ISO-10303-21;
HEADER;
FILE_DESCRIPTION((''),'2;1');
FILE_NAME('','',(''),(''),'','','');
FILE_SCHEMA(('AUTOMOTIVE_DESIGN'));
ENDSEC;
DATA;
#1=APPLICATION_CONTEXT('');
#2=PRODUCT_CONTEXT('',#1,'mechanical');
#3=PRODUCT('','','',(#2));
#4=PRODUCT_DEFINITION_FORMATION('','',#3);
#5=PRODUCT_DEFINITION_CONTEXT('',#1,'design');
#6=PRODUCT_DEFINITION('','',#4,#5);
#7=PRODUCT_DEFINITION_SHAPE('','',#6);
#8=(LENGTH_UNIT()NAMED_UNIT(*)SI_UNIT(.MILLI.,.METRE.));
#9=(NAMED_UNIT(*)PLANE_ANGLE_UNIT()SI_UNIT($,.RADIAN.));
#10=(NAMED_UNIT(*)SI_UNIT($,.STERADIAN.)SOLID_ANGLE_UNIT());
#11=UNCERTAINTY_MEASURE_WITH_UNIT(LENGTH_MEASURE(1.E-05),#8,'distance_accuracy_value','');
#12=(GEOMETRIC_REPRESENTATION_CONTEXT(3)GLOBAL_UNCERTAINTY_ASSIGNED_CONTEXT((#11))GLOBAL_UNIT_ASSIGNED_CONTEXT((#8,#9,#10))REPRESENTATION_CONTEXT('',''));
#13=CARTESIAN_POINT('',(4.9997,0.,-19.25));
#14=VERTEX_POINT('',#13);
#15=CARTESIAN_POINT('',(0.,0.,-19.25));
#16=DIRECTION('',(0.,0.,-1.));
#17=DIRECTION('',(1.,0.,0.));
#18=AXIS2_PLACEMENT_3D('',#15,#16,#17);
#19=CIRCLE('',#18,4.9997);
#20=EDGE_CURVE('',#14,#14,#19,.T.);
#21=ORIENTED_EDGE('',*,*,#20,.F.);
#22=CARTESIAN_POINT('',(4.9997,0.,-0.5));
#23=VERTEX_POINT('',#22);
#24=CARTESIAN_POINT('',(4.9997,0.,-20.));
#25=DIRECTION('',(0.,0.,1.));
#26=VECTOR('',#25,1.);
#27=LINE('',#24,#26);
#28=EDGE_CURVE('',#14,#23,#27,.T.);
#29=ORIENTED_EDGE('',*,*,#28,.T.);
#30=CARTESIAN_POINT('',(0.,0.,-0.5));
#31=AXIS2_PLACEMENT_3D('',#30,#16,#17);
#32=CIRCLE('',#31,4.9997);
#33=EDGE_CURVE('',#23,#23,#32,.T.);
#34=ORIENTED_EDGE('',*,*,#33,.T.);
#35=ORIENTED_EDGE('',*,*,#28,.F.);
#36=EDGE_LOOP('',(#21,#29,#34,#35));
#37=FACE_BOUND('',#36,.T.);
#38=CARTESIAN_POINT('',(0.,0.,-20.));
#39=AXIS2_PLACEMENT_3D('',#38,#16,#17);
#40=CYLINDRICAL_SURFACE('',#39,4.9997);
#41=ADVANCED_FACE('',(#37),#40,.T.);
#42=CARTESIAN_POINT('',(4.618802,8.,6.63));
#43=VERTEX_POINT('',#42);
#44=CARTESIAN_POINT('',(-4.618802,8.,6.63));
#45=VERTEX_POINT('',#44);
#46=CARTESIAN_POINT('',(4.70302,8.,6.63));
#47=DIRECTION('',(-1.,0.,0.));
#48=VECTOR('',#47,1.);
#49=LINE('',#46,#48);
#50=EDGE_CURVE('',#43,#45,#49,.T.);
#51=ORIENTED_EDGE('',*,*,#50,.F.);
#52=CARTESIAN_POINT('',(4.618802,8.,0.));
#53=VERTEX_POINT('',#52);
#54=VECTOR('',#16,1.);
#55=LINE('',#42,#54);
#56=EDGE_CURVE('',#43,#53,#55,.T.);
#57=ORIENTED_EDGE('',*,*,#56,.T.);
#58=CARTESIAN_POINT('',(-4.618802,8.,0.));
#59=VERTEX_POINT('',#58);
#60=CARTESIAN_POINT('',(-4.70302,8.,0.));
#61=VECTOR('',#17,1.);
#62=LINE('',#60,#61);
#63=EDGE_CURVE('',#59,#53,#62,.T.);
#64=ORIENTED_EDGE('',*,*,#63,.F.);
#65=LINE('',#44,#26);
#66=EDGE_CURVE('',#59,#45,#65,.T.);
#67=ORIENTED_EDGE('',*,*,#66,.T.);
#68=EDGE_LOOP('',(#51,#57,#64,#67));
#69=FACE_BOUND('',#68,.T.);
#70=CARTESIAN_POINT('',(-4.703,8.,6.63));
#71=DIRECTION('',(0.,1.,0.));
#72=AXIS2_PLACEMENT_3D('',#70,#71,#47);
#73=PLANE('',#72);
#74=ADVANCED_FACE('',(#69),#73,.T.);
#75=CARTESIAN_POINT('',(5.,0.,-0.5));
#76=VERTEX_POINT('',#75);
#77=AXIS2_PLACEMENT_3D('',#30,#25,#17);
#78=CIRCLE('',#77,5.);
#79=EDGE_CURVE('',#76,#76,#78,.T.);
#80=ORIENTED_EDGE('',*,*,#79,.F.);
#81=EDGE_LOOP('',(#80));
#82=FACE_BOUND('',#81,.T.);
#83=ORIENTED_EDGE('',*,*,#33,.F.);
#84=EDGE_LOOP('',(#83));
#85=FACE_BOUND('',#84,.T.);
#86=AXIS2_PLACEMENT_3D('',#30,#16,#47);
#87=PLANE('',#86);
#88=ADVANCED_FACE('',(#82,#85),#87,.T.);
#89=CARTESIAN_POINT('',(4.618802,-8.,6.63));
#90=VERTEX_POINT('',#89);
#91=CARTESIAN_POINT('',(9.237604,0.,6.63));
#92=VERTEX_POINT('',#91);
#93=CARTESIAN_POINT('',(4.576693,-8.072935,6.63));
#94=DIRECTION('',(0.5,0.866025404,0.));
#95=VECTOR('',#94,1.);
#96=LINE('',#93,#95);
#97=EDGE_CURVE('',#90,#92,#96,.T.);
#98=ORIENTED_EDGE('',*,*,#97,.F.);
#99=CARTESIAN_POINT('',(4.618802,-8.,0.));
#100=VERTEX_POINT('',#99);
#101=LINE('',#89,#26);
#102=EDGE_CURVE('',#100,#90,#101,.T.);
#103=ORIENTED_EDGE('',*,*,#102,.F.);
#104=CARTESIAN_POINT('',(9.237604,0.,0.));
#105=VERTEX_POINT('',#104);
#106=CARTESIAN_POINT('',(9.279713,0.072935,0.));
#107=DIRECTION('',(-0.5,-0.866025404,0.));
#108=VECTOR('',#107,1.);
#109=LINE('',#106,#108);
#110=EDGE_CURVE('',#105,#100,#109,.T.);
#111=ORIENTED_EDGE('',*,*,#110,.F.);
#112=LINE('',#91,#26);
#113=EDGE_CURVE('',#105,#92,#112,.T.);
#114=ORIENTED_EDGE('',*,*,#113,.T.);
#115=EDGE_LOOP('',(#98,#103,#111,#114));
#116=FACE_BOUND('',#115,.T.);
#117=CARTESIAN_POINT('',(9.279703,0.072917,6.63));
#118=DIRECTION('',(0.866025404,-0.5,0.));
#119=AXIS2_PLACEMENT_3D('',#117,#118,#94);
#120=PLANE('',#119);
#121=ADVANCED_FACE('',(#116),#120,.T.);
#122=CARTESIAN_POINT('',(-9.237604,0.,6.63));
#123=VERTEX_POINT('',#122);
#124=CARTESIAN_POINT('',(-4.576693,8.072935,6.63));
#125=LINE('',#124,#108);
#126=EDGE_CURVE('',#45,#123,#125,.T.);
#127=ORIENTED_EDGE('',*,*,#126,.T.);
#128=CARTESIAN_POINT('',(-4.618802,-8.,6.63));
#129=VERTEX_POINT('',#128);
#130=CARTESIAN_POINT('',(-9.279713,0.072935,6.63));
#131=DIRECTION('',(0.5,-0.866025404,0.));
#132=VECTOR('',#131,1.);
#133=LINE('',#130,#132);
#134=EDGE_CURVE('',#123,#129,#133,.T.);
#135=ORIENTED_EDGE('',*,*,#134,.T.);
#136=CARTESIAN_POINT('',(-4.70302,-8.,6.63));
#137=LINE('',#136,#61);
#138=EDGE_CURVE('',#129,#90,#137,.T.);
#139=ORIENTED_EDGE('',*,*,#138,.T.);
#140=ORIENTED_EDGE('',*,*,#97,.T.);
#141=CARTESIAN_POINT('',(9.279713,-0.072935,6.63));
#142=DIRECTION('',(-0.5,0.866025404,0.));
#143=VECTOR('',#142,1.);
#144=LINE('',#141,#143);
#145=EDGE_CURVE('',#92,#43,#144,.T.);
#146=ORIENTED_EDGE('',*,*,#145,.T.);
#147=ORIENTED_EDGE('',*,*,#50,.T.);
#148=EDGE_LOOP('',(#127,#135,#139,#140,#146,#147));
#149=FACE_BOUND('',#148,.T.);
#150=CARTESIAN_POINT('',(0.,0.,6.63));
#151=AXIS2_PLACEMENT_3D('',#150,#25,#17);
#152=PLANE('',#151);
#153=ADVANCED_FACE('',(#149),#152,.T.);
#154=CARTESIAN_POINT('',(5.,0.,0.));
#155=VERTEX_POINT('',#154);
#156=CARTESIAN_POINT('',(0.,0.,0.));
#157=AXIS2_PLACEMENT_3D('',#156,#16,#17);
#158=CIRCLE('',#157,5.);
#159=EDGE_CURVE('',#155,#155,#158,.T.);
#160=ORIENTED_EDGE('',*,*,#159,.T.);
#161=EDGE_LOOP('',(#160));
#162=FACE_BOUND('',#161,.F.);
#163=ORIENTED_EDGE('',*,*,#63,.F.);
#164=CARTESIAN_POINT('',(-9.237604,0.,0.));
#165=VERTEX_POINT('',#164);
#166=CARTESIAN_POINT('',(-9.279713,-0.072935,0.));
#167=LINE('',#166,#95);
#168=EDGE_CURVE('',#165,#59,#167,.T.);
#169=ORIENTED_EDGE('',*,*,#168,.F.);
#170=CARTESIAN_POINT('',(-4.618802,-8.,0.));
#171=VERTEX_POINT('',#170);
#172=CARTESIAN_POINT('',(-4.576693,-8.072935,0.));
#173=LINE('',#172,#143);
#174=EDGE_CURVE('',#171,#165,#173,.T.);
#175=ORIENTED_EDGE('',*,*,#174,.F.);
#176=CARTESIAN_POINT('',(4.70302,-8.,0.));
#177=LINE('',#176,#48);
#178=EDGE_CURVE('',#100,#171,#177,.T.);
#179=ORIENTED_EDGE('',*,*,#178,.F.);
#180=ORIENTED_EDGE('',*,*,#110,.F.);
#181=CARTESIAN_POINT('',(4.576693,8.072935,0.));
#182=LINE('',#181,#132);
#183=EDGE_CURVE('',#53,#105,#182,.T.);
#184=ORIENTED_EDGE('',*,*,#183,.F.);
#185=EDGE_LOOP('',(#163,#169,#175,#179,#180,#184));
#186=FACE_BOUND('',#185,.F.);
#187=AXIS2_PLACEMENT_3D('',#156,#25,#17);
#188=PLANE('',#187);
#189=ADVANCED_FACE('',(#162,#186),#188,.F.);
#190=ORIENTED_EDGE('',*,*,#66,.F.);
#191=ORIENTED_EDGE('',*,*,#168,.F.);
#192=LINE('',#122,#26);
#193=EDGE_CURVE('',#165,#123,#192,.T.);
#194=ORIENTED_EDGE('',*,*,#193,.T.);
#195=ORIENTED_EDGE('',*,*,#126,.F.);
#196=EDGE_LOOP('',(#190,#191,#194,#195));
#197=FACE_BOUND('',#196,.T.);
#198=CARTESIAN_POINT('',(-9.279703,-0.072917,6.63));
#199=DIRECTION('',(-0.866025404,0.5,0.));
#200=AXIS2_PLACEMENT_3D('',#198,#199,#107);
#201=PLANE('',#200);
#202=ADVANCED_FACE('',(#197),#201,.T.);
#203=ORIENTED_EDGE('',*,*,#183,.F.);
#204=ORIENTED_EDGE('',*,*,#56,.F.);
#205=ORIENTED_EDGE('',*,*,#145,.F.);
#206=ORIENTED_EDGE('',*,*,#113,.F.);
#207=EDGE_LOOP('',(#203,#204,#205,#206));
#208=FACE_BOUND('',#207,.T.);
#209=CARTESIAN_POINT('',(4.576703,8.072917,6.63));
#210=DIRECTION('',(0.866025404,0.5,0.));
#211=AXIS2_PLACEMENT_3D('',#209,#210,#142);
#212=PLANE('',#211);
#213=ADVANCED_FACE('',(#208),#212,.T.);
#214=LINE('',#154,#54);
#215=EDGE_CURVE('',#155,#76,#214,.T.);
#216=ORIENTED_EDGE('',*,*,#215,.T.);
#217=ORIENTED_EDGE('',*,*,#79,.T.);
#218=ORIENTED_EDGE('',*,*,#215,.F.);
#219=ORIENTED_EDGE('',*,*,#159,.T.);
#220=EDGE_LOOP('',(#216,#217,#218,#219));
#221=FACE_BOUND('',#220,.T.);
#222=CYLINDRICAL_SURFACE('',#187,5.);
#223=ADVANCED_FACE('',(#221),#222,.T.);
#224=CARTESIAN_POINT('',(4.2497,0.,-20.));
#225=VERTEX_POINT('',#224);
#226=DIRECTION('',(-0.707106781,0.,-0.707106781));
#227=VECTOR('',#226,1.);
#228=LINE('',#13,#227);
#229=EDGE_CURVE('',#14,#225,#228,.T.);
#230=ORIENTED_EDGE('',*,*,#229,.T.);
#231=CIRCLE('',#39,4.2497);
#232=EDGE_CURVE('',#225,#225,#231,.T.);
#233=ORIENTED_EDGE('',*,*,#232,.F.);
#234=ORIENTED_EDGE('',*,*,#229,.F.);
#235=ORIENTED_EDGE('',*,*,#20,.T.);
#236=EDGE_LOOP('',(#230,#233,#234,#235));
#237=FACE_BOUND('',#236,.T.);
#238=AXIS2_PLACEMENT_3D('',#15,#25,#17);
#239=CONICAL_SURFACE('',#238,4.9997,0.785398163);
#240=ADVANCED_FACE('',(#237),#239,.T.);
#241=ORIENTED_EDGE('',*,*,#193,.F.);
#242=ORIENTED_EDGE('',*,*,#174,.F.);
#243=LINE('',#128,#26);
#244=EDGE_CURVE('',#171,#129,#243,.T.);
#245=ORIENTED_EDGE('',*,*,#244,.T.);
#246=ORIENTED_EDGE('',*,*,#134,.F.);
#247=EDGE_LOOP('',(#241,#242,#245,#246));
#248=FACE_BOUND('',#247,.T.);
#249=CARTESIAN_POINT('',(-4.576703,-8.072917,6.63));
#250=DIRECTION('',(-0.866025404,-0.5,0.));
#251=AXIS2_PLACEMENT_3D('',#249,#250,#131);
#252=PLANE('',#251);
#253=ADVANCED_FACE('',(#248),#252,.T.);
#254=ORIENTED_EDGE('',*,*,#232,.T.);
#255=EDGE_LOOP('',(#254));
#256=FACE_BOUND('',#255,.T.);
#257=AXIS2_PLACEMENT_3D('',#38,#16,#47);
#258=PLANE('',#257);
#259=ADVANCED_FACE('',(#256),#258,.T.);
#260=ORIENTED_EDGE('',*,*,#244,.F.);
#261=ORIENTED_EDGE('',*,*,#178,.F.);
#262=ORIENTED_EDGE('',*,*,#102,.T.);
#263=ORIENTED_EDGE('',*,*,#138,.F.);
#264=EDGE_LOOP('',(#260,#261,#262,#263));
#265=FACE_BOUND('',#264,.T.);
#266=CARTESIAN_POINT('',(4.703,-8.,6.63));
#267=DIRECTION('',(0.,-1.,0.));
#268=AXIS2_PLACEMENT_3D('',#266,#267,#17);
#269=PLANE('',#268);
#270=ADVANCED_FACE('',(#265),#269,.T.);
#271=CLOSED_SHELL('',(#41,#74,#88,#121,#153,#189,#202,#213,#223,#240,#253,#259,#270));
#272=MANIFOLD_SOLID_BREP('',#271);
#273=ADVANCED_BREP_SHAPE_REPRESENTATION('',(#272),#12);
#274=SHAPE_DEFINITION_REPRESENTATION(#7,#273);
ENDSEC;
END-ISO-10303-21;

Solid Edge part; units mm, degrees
sketch "Sketch1" plane through (0, 0, 0) normal (0, 0, 1) x (1, 0, 0)
  circle A0 centre (0, 0) radius 9.28
  dimension "D1" = 18.56
extrude "Protrusion1" add sketch "Sketch1" along normal blind 6.63
sketch "Sketch2" plane through (0, 0, 0) normal (0, 0, -1) x (1, 0, 0)
  circle A0 centre (0, 0) radius 5
extrude "Protrusion2" add sketch "Sketch2" along normal blind 20
sketch "Sketch3" plane through (0, 0, -20) normal (0, 0, -1) x (1, 0, 0)
  circle A0 centre (0, 0) radius 4.9997
extrude "Cutout1" cut sketch "Sketch3" against normal blind 19.5 flip side to cut
chamfer "Chamfer_1" distance 0.75 angle 45 1 edges at (-4.9997, 0, -20)
sketch "Sketch4" plane through (0, 0, 6.63) normal (0, 0, 1) x (1, 0, 0)
  line L0 (-4.703, 8) -> (4.703, 8)
  dimension "D1" = 16
extrude "Cutout2" cut sketch "Sketch4" against normal up to next material side at (0, 8.05, 6.63)
pattern_circular "Pattern1" count 6 over 360 about axis through (0, 0, 6.63) along (0, 0, 1) of "Cutout2"
properties part number "24104324"
